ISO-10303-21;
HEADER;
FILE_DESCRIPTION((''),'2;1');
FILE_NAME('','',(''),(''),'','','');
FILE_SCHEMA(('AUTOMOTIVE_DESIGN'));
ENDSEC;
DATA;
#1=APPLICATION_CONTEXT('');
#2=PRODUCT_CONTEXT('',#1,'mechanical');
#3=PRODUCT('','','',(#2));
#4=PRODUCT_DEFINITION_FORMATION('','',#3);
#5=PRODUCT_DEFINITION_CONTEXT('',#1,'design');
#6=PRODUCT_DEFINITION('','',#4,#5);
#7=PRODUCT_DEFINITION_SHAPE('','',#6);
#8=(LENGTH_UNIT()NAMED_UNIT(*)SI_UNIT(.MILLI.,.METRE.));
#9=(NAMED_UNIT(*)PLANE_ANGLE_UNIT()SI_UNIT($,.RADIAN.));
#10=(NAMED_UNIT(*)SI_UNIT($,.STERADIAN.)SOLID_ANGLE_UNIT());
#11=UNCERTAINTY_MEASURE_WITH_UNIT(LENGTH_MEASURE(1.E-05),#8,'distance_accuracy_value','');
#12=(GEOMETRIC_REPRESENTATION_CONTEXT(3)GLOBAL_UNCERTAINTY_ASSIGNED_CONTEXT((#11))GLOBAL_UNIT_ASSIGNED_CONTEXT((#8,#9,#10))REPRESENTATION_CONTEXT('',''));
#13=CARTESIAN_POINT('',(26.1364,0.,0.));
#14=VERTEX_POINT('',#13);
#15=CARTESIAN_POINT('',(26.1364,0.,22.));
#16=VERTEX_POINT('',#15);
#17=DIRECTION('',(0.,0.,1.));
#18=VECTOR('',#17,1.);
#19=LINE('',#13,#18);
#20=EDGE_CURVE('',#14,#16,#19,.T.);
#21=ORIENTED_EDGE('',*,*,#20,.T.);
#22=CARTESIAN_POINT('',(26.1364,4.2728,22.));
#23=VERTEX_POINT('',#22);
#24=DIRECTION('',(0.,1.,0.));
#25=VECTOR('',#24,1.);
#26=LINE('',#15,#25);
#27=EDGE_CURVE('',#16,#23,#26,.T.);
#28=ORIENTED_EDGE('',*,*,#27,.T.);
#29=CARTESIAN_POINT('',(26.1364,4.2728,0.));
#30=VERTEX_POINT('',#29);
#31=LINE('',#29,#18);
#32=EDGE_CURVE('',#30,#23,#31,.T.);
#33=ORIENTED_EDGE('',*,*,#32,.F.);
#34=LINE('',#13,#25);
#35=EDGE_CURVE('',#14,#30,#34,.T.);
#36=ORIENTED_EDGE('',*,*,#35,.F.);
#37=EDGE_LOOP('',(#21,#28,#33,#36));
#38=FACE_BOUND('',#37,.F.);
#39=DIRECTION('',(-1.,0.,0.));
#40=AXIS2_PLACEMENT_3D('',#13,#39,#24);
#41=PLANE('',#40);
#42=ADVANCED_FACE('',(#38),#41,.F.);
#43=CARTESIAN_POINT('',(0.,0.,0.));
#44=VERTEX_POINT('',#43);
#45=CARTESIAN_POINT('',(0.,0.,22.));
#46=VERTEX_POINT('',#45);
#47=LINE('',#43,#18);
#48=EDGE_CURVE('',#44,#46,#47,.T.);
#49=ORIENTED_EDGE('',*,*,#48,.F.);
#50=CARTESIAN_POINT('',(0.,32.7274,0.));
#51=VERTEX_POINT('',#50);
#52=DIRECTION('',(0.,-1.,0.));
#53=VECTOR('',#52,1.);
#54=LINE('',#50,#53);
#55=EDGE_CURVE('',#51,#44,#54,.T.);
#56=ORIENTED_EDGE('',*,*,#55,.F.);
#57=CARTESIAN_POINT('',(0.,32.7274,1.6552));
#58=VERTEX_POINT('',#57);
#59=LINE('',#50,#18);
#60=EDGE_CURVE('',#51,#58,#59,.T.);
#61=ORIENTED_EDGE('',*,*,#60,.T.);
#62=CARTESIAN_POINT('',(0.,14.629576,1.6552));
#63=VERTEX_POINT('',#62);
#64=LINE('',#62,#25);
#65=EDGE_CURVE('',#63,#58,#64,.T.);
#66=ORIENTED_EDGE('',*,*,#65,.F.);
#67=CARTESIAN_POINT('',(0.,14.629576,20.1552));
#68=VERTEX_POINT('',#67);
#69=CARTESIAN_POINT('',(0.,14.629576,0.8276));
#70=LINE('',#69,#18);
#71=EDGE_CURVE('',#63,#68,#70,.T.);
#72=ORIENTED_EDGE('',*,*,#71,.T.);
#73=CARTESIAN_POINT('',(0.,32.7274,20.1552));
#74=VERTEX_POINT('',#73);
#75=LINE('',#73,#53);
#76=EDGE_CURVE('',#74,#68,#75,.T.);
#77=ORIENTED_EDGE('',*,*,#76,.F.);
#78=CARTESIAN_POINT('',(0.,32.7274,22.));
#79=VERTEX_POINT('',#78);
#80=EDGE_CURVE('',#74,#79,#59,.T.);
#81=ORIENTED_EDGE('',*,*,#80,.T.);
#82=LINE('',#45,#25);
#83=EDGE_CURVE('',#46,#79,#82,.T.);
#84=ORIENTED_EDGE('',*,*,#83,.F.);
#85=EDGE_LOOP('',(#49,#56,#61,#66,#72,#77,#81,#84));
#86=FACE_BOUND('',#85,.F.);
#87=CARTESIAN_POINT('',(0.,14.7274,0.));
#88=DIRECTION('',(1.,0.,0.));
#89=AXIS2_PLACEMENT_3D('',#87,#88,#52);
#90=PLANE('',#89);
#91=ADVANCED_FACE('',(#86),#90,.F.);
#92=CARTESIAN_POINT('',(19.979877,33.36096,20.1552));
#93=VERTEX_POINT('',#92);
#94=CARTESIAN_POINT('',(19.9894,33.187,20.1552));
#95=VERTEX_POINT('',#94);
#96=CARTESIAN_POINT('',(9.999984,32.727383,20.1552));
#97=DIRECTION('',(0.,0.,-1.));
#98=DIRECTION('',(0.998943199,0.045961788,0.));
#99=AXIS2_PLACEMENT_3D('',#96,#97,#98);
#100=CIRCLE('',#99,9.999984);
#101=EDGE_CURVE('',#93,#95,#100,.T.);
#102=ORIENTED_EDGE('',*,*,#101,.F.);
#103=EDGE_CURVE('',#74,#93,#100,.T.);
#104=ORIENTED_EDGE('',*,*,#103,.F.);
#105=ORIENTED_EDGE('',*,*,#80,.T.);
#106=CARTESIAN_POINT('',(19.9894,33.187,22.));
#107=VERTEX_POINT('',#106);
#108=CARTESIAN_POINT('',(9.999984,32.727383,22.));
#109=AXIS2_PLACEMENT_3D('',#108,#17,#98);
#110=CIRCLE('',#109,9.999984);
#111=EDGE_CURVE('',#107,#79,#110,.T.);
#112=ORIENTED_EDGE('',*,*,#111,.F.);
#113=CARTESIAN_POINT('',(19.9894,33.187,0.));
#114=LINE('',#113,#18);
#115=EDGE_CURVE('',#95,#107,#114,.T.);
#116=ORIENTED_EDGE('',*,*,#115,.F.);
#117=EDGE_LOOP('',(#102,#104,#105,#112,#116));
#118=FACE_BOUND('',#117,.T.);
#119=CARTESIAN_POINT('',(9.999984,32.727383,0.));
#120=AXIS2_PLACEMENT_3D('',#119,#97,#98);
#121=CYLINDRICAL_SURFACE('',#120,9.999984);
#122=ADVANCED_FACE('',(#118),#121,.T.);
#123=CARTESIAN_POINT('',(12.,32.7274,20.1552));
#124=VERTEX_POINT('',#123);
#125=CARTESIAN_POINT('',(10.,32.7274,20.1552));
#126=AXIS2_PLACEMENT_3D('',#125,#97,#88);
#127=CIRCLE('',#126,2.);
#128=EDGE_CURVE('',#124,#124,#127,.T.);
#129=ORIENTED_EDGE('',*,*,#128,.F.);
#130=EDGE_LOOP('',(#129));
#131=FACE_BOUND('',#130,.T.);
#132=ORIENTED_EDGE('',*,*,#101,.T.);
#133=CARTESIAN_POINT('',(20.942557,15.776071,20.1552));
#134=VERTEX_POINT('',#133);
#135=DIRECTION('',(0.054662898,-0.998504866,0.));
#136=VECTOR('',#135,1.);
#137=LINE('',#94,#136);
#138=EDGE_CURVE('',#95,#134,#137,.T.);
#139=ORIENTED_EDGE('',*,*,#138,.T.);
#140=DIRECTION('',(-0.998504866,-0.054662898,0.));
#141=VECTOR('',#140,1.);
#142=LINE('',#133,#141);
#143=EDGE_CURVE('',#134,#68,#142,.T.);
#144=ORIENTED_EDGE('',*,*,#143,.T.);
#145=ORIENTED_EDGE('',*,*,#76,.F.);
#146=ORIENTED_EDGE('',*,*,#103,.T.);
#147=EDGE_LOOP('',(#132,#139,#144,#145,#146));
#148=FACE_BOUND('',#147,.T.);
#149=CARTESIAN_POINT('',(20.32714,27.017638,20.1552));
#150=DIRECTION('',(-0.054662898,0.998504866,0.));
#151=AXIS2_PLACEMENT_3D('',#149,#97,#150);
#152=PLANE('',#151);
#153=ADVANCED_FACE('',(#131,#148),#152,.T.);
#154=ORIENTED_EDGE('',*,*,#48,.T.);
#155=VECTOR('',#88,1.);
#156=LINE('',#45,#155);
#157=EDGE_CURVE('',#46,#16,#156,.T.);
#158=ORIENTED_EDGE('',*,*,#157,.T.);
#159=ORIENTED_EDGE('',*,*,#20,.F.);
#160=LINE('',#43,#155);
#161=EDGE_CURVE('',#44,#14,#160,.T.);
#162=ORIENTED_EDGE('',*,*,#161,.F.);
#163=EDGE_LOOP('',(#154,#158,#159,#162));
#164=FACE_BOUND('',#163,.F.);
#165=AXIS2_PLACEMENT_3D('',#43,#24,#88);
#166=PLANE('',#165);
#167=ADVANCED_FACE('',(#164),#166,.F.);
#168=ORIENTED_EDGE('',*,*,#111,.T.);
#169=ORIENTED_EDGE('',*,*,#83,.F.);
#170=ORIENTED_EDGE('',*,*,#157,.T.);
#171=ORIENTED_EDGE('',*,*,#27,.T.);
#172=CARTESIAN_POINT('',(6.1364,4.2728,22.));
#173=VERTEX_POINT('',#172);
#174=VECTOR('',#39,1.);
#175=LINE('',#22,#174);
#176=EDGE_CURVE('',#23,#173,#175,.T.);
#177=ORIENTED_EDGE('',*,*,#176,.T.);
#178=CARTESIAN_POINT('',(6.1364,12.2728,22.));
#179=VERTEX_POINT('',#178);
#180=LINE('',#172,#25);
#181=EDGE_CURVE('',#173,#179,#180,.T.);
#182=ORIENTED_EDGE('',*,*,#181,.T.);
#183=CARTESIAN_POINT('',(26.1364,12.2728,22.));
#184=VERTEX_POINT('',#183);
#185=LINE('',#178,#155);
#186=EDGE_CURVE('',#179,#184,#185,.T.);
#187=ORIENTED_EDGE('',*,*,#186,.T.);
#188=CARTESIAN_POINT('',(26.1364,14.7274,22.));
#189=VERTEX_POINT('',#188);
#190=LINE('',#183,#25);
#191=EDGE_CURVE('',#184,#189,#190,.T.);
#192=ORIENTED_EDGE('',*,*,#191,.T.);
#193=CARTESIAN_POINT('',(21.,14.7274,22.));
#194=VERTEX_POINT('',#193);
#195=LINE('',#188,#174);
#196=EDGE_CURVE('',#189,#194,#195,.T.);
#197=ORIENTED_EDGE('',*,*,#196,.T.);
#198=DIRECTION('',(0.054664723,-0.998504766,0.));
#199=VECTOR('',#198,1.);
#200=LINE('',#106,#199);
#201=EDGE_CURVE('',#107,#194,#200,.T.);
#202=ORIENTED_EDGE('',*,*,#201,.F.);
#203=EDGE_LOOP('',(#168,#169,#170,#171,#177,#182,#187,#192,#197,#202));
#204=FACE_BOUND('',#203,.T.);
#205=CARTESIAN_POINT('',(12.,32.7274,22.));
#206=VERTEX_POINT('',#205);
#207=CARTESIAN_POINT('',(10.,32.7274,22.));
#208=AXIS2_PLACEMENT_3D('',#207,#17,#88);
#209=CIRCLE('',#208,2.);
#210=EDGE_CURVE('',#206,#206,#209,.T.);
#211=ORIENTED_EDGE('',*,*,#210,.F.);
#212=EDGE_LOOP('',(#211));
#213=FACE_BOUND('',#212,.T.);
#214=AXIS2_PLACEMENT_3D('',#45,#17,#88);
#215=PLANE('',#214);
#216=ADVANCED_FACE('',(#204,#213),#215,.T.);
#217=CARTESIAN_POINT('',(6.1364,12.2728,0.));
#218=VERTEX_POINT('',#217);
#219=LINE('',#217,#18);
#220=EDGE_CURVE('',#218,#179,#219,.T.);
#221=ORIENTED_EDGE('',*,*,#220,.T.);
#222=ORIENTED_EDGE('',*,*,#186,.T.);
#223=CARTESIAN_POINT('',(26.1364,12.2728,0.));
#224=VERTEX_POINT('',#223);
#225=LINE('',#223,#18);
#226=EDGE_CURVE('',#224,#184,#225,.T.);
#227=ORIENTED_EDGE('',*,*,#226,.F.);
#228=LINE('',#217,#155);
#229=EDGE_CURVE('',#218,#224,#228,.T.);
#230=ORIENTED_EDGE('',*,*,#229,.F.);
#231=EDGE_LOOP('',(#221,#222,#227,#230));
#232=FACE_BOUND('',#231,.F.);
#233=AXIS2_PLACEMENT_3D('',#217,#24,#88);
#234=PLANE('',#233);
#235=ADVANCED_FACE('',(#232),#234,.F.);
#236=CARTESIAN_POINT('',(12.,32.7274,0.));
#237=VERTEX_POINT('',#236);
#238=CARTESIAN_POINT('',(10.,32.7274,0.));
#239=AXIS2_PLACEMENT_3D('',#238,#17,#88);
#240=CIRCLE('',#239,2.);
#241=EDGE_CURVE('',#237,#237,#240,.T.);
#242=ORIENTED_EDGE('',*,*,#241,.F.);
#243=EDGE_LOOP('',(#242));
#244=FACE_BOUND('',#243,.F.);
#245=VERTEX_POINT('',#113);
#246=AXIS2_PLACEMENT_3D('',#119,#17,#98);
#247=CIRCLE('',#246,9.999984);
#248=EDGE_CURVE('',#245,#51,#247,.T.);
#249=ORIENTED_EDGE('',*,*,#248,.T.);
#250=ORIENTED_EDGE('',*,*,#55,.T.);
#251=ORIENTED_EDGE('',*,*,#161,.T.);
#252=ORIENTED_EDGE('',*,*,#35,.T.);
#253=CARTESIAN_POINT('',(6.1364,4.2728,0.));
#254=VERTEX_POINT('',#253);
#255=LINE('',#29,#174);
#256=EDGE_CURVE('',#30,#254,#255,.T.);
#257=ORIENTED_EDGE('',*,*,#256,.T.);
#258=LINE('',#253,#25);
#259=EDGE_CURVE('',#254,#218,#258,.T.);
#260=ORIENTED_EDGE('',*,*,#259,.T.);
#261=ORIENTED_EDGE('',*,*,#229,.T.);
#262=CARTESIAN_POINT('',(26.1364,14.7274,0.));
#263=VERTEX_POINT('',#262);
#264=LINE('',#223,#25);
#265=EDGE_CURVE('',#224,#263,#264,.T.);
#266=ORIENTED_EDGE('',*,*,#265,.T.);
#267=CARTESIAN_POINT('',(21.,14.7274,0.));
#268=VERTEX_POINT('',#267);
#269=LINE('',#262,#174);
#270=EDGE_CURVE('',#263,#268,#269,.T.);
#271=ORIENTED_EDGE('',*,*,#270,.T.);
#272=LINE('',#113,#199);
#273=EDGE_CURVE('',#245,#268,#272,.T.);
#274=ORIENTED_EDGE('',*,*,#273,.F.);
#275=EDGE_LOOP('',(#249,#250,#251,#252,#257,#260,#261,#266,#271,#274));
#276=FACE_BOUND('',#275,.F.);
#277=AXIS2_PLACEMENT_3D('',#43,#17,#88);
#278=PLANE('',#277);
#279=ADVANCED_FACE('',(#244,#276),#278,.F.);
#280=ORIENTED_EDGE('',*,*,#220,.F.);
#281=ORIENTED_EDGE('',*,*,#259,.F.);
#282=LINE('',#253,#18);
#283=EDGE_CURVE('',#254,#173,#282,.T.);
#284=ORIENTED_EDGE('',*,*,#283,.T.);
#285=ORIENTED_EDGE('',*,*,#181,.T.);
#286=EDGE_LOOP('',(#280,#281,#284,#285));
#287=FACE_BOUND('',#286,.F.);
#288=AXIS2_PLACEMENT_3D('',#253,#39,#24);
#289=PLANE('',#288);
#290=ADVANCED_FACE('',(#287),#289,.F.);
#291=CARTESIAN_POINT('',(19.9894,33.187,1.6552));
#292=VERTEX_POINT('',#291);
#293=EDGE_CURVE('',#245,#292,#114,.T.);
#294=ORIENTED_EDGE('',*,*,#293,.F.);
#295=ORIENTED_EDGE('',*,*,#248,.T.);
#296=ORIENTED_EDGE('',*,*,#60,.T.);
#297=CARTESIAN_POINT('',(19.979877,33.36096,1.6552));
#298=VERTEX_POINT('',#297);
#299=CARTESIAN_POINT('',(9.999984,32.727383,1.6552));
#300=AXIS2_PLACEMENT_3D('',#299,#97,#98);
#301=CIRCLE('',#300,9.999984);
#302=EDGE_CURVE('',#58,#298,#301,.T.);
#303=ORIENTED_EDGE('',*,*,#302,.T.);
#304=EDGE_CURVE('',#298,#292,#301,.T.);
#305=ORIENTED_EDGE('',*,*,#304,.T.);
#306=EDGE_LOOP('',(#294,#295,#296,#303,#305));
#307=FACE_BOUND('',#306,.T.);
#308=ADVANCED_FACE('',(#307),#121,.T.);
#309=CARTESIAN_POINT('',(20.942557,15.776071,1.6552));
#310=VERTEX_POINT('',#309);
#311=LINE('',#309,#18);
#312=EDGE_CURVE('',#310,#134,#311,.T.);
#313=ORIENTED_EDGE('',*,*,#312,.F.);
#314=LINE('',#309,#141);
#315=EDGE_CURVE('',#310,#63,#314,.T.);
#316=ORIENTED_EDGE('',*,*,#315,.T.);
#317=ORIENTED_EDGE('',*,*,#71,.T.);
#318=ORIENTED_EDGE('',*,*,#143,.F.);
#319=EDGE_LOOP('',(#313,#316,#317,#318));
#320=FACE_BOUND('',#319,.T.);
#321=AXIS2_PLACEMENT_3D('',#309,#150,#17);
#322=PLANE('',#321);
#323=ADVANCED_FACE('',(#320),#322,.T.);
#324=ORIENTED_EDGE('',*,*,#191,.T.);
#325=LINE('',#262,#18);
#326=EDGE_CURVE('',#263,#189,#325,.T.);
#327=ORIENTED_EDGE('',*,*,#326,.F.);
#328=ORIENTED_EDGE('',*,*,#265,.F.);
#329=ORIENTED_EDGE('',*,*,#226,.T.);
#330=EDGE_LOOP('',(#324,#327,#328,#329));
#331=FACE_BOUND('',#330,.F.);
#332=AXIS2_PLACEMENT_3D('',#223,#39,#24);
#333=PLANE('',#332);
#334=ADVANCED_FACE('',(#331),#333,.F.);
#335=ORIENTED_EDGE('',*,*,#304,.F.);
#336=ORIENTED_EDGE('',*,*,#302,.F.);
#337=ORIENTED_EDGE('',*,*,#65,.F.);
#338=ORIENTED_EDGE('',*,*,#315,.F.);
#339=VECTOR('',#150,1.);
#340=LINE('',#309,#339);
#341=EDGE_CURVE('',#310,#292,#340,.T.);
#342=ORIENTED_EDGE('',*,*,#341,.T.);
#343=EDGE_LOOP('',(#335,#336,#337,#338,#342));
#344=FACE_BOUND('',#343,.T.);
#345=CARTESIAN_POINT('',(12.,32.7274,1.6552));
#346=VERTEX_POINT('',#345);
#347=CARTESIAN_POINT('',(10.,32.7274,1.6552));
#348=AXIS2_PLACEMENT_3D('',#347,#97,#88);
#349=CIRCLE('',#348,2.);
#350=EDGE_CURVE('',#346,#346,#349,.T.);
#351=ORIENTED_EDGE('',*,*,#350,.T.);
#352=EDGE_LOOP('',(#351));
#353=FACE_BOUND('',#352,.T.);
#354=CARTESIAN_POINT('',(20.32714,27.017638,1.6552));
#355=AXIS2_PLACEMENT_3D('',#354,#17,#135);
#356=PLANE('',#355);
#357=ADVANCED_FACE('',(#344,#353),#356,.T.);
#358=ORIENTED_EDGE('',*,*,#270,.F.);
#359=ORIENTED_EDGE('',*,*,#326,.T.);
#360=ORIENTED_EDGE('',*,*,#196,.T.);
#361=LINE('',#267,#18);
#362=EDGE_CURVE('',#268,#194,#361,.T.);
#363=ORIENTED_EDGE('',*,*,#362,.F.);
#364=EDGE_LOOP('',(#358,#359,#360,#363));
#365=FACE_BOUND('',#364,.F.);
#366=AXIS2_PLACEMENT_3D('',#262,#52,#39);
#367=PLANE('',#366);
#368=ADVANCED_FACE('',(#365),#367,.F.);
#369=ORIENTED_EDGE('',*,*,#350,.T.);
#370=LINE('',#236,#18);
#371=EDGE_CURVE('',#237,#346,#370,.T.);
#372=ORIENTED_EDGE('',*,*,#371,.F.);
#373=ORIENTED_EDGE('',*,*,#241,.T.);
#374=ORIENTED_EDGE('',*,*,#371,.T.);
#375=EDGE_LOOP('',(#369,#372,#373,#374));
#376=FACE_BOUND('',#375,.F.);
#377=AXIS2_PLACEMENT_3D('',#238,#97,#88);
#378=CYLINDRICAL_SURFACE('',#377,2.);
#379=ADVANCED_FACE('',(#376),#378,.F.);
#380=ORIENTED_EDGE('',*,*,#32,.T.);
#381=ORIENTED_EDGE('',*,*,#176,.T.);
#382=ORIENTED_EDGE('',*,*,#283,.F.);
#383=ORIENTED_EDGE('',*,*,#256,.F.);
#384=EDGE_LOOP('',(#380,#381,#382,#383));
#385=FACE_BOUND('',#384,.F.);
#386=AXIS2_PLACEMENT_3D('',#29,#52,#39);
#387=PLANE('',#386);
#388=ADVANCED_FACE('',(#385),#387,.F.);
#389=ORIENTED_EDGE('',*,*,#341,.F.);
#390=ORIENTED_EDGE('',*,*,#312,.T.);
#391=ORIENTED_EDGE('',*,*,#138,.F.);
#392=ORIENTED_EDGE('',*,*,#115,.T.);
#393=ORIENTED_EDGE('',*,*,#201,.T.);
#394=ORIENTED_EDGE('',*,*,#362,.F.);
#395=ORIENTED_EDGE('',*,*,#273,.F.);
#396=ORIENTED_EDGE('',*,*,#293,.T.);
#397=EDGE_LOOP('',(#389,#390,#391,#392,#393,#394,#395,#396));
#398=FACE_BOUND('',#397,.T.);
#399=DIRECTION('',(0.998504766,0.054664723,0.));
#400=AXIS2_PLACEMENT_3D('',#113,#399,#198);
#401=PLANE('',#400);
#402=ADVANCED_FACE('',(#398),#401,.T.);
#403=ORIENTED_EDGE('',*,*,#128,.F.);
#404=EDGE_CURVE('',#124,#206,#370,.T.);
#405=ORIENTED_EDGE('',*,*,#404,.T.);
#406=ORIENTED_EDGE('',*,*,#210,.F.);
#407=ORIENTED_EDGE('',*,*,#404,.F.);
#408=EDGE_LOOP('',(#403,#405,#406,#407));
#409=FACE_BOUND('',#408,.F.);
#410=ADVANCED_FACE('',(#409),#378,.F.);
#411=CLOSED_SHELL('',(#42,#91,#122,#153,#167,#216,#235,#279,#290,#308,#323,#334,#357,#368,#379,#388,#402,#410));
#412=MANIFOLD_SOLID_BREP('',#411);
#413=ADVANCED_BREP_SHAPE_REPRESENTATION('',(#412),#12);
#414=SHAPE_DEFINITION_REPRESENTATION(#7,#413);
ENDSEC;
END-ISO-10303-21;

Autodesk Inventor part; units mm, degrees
ref_plane "YZ Plane" through (0, 0, 0) normal (1, 0, 0) x (0, 1, 0)
ref_plane "XZ Plane" through (0, 0, 0) normal (0, 1, 0) x (-1, 0, 0)
ref_plane "XY Plane" through (0, 0, 0) normal (0, 0, 1) x (1, 0, 0)
sketch "Sketch1" plane through (0, 0, 0) normal (0, 0, 1) x (1, 0, 0)
  line L0 (0, 0) -> (26.1364, 0)
  line L1 (26.1364, 0) -> (26.1364, 4.2728)
  line L2 (26.1364, 4.2728) -> (6.1364, 4.2728)
  line L3 (6.1364, 4.2728) -> (6.1364, 12.2728)
  line L4 (6.1364, 12.2728) -> (26.1364, 12.2728)
  line L5 (26.1364, 12.2728) -> (26.1364, 14.7274)
  line L6 (26.1364, 14.7274) -> (0, 14.7274)
  line L7 (0, 14.7274) -> (0, 0)
  line L8 (0, 14.7274) -> (0, 32.7274)
  arc A0 (19.9894, 33.187) -> (0, 32.7274) centre (10, 32.7274) ccw
  line L9 (19.9894, 33.187) -> (21, 14.7274)
  circle A1 centre (10, 32.7274) radius 2
  dimension "d0" = 20
  dimension "d1" = 8
  dimension "d3" = 4
  dimension "d4" = 10
  dimension "d5" = 18
  dimension "d7" = 19.9894
extrude "Extrusion1" add sketch "Sketch1" along normal blind 22
sketch "Sketch2" plane through (19.9894, 33.187, 22) normal (0.9985049, 0.0546629, 0) x (0, 0, -1)
  line L0 (1.8448, -6.1786) -> (1.8448, -17.437)
  line L1 (20.3448, -6.1786) -> (20.3448, -17.437)
  line L2 (20.3448, -17.437) -> (1.8448, -17.437)
  line L3 (1.8448, -6.1786) -> (1.8448, 10.563)
  line L4 (1.8448, 10.563) -> (20.3448, 10.563)
  line L5 (20.3448, 10.563) -> (20.3448, -6.1786)
  dimension "d14" = 28
  dimension "d17" = 18.5
extrude "Extrusion2" cut sketch "Sketch2" against normal through all
sketch "Sketch3" plane through (19.9894, 33.187, 22) normal (-0.9985049, -0.0546629, 0) x (0, 0, 1)
  line L0 (-20.3448, 0.1742) -> (-1.8448, 0.1742) projected
  line L1 (-1.8448, 0.1742) -> (-17.8448, 0.1742)
  line L2 (-17.8448, 0.1742) -> (-17.8448, -0.1891)
  line L3 (-17.8448, -0.1891) -> (-1.8448, -0.1891)
  line L4 (-1.8448, -0.1891) -> (-1.8448, 0.1742)
  point P0 (-22, -32.0447)
extrude "Extrusion3" cut sketch "Sketch3" against normal through all
sketch "Sketch4" plane through (21, 14.7274, 22) normal (0.9985049, 0.0546629, 0) x (0, 0, -1)
  point P0 (22, -13.5574)
sketch "Sketch5" plane through (0, 0, 22) normal (0, 0, 1) x (1, 0, 0)
  point P0 (0, 0)
sketch "Sketch6" plane through (0, 0, 0) normal (0, 0, -1) x (-1, 0, 0)
  point P0 (0, 0)
sketch "Sketch7" plane through (0, 0, 22) normal (0, 0, 1) x (1, 0, 0)
  point P0 (0, 0)
sketch "Sketch8" plane through (19.9894, 33.187, 22) normal (-0.9985049, -0.0546629, 0) x (0, 0, 1)
  point P0 (-22, -32.0447)
sketch "Sketch9" plane through (19.9894, 33.187, 22) normal (-0.9985049, -0.0546629, 0) x (0, 0, 1)
  line L0 (-20.3448, 0) -> (-20.3448, -17.437) projected
  line L1 (-20.3448, 0.1742) -> (-17.8448, 0.1742) projected
  line L2 (-20.3448, 0) -> (-17.8448, 0)
  line L3 (-17.8448, 0) -> (-17.8448, 0.1742)
  line L4 (-17.8448, 0.1742) -> (-20.3448, 0.1742)
  line L5 (-20.3448, 0.1742) -> (-20.3448, 0)
  point P0 (-22, -32.0447)
extrude "Extrusion4" cut sketch "Sketch9" against normal through all
properties part number "Maintients poullie v1"
